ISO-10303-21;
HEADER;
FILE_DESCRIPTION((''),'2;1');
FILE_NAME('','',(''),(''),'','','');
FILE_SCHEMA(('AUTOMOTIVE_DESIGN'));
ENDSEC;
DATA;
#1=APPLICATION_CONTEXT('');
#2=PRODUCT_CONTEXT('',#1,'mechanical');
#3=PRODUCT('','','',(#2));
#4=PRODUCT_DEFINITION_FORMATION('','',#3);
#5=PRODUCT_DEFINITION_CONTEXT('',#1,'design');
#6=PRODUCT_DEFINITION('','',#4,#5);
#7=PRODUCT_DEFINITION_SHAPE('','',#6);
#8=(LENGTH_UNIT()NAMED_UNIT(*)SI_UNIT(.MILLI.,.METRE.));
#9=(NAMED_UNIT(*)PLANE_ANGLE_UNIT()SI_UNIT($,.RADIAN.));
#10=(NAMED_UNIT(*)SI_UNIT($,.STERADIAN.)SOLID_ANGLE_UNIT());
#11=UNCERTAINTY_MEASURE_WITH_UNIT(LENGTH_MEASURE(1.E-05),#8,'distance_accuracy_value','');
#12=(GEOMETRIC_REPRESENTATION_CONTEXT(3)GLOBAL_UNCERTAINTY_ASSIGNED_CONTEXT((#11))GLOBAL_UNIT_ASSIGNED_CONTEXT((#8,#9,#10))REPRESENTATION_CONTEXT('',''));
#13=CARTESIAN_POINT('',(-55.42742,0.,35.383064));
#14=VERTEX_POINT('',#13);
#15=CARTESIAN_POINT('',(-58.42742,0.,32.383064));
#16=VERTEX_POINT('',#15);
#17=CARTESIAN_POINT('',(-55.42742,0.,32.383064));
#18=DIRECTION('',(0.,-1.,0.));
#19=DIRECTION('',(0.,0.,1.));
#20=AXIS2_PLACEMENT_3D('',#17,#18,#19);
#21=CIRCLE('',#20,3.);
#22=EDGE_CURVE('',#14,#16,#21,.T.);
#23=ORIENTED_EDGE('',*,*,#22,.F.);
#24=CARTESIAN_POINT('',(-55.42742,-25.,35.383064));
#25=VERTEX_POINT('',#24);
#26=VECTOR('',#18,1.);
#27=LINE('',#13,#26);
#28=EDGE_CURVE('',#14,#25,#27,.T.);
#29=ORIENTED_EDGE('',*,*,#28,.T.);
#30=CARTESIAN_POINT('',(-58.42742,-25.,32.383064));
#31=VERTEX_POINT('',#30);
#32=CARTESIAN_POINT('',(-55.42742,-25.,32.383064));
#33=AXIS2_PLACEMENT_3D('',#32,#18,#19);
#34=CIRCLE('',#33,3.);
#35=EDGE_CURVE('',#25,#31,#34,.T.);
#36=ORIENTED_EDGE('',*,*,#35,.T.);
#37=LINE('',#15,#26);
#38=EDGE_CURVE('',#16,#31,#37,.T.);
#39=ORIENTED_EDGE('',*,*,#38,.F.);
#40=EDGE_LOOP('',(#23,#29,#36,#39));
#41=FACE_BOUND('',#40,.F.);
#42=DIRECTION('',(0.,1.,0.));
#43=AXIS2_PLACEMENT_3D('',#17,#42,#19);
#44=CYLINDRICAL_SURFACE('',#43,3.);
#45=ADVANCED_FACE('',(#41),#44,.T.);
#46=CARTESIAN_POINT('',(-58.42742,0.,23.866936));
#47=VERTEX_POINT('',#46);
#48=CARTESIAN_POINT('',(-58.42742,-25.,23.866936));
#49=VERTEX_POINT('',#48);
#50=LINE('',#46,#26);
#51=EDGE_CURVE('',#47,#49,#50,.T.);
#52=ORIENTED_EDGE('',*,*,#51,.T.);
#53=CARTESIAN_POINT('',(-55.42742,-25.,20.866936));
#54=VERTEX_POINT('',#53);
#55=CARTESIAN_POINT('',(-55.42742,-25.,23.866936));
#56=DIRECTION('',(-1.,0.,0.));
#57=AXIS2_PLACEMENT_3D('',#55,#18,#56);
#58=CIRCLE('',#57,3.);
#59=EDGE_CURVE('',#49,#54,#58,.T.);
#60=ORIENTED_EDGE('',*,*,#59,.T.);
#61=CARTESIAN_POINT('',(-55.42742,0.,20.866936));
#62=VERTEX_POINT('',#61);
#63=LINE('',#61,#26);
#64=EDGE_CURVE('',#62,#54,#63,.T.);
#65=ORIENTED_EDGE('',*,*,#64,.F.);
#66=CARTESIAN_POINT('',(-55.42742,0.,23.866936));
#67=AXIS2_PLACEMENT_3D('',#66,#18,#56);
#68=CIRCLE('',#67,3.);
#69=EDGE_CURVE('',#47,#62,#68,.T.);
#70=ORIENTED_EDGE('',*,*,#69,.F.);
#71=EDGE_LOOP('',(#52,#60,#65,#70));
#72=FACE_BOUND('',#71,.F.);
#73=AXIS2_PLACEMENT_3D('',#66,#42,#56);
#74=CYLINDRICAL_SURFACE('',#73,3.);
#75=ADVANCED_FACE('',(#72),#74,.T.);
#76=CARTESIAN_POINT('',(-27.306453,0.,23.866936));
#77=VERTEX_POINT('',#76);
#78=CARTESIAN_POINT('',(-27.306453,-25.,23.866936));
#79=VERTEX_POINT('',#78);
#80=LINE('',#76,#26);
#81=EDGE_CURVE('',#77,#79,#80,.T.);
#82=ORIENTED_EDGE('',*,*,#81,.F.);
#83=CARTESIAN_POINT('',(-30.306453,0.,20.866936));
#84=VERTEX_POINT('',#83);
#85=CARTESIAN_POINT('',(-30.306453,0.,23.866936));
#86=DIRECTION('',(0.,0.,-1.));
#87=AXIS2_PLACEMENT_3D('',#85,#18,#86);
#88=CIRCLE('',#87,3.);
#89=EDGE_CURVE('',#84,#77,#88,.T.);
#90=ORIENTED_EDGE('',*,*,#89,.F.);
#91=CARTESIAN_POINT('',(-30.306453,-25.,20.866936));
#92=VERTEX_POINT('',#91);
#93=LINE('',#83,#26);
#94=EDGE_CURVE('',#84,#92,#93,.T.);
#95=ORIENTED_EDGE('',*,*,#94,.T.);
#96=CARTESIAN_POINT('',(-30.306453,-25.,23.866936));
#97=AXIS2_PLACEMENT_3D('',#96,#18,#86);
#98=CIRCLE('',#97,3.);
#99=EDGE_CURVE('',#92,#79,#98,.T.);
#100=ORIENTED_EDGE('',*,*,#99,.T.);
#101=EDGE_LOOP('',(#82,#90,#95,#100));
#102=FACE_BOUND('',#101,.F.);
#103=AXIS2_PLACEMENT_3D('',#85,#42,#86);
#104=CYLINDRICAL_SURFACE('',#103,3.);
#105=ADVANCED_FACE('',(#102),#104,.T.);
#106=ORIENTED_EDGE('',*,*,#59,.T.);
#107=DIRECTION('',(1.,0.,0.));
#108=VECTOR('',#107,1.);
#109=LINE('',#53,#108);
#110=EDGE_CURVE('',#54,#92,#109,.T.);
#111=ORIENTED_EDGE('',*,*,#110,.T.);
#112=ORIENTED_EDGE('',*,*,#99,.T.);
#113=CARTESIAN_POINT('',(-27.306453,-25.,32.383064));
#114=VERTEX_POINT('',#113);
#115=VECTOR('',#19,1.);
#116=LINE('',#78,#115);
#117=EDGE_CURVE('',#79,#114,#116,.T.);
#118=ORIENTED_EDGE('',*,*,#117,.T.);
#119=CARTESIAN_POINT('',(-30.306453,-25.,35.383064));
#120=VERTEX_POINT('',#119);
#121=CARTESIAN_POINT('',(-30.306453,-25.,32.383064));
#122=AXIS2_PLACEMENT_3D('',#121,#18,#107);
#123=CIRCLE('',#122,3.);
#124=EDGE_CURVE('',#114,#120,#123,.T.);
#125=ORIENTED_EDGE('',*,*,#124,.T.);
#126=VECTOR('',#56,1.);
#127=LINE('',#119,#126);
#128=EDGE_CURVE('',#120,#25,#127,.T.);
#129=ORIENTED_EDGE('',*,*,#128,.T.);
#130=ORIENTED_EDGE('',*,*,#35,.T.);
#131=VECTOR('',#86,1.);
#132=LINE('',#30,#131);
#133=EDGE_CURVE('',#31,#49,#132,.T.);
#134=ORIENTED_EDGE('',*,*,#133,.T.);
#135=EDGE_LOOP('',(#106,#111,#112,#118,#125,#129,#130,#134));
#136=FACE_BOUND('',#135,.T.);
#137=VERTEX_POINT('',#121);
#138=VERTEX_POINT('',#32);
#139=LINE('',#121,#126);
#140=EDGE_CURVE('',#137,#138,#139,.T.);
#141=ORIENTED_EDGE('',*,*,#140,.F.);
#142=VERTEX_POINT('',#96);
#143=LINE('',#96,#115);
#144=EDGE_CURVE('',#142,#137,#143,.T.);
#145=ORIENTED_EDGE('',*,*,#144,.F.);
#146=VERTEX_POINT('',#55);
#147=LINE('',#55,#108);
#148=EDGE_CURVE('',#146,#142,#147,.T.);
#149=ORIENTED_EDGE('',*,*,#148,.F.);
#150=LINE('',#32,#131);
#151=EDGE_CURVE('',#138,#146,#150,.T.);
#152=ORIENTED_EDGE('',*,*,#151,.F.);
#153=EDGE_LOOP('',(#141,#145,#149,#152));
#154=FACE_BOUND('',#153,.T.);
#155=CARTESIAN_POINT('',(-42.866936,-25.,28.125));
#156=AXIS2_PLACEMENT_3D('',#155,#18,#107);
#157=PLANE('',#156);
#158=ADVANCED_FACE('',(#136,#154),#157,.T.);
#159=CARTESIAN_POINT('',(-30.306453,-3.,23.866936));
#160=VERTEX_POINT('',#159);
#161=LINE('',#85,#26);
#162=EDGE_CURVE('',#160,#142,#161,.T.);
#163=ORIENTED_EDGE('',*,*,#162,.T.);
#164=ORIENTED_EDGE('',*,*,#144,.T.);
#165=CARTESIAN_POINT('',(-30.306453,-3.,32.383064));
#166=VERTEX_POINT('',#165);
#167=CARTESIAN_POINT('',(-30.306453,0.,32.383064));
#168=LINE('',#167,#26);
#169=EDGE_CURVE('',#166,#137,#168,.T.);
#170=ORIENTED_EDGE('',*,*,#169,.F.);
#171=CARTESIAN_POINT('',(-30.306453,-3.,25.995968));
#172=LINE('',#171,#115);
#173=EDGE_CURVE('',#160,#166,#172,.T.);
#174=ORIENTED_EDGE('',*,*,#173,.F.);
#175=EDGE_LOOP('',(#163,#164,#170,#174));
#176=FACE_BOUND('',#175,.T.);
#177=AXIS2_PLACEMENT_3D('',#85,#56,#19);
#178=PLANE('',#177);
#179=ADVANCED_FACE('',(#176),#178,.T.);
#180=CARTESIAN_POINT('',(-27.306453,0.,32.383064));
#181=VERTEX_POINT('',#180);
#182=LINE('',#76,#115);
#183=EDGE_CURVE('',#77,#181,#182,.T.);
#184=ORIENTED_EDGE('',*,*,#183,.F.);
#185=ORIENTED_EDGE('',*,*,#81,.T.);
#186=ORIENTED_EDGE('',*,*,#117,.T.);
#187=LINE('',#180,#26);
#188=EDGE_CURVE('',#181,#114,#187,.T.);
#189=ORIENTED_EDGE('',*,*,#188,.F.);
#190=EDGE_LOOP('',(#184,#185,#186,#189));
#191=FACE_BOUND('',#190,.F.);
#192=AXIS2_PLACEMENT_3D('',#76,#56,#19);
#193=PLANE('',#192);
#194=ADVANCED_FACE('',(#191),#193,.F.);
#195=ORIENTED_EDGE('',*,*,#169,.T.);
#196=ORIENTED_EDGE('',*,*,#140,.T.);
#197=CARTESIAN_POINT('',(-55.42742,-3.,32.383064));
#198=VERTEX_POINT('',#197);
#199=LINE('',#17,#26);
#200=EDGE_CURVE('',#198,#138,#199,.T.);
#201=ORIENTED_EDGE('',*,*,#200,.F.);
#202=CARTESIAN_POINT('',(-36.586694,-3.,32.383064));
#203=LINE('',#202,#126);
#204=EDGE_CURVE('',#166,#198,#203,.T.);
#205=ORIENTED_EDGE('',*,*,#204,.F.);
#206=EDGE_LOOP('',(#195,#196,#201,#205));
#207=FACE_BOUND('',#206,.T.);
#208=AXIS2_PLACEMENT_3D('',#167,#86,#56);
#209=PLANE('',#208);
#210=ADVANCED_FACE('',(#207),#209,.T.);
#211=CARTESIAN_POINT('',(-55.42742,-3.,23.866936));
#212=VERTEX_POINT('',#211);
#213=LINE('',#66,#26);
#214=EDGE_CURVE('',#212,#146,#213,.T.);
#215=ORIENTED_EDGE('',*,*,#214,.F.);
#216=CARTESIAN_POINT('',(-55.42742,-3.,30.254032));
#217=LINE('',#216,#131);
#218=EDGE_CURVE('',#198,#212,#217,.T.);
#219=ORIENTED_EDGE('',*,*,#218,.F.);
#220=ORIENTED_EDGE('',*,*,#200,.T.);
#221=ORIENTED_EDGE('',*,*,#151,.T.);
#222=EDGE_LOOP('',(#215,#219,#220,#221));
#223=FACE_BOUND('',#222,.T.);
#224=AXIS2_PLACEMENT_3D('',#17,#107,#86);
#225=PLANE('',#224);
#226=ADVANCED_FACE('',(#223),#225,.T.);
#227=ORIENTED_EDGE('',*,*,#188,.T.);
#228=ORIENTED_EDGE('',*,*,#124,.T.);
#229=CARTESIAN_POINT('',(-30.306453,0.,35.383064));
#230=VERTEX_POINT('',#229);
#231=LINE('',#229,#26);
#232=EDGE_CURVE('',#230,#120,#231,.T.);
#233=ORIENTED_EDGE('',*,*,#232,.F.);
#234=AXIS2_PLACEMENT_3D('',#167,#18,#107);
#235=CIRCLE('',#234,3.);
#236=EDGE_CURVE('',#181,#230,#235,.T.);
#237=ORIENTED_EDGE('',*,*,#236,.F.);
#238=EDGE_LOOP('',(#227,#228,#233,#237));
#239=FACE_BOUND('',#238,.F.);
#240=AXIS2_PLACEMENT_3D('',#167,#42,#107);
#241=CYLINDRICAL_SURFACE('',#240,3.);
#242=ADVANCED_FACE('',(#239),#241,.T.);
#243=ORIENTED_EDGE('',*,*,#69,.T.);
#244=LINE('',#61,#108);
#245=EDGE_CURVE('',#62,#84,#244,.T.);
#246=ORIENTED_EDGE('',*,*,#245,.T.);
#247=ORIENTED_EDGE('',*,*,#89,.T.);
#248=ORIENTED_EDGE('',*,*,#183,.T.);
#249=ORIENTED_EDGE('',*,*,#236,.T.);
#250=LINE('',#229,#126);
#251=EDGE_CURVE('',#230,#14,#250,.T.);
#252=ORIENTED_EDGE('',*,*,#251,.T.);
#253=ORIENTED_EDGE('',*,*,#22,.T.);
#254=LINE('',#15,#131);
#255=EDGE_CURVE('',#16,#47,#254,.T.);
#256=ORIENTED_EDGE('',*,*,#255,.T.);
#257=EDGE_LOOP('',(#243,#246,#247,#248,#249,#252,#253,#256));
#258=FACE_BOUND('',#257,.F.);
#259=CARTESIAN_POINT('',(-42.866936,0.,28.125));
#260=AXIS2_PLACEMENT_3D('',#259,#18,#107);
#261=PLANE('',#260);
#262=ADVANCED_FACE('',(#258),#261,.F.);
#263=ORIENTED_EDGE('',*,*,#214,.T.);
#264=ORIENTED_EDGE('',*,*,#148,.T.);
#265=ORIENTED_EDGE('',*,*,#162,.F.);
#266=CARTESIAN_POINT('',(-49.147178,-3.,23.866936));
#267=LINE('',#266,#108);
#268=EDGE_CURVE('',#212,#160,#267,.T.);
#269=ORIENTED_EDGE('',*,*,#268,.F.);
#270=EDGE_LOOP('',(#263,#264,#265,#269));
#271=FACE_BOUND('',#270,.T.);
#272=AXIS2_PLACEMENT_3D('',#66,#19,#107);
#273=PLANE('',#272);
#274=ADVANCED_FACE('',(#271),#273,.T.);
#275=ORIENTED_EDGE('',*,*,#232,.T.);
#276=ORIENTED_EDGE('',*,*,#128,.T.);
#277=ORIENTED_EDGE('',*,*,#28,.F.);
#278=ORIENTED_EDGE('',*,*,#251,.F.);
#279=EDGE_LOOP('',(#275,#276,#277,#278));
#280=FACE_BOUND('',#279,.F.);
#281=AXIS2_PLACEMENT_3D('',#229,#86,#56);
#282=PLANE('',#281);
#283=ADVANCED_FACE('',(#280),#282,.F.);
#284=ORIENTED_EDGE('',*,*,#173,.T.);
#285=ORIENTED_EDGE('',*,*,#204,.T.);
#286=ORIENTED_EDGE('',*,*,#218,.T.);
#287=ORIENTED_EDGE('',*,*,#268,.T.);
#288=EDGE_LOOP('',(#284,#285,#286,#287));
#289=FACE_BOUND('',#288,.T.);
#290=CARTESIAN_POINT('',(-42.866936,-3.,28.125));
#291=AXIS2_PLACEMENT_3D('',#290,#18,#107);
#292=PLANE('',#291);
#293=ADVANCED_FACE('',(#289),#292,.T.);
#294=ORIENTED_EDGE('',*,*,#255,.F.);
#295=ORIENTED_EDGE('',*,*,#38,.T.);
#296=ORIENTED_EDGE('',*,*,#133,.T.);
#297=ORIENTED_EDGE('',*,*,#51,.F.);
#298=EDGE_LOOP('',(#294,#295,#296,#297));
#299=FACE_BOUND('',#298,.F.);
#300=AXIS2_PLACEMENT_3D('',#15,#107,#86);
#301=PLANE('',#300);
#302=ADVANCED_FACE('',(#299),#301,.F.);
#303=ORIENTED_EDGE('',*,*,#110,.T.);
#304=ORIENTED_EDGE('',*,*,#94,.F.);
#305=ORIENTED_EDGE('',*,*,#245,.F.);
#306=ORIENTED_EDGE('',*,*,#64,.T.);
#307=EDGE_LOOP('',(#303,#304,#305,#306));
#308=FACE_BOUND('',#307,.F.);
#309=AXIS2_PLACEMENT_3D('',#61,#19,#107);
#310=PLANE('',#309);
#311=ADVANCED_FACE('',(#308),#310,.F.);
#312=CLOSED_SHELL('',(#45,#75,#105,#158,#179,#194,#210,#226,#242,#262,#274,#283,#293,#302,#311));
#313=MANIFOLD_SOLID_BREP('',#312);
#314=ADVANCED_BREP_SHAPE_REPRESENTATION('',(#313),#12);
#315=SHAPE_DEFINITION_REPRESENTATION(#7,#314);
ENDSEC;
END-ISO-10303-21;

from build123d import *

# Parameters (mm, degrees)
F1_DEPTH = 25
F2_T     = 3


# Not quite as in the source:
# - a shell that OpenCascade refuses in one call is made with other operations: the cavity is built on its own and cut out


with BuildPart() as f1:
    # F0 (on Front) → F1 (new body)
    with BuildSketch(Plane.XZ):
        with BuildLine():
            Line((-30.3064525574, 35.3830642998), (-55.4274195135, 35.3830642998))
            ThreePointArc((-55.4274195135, 35.3830642998), (-57.548739857, 34.5043846434), (-58.4274195135, 32.3830642998))
            Line((-58.4274195135, 32.3830642998), (-58.4274195135, 23.8669360727))
            ThreePointArc((-58.4274195135, 23.8669360727), (-57.548739857, 21.7456157291), (-55.4274195135, 20.8669360727))
            Line((-55.4274195135, 20.8669360727), (-30.3064525574, 20.8669360727))
            ThreePointArc((-30.3064525574, 20.8669360727), (-28.1851322139, 21.7456157291), (-27.3064525574, 23.8669360727))
            Line((-27.3064525574, 23.8669360727), (-27.3064525574, 32.3830642998))
            ThreePointArc((-27.3064525574, 32.3830642998), (-28.1851322139, 34.5043846434), (-30.3064525574, 35.3830642998))
        make_face()
    extrude(amount=F1_DEPTH)

    # F2: shell of thickness 3, made by hand


with BuildPart() as f2_core1:
    # F2_t2: copy of F1
    add(f1.part)

    # the walls: a layer under each face that stays
    f2_faces = [f2_core1.faces().sort_by_distance(p)[0] for p in [
        (-42.8669360355, -12.5, 35.3830642998),
        (-58.4274195135, -12.5, 28.1250001863),
        (-42.8669360355, -12.5, 20.8669360727),
        (-27.3064525574, -12.5, 28.1250001863),
        (-42.8669360355, 0, 28.1250001863),
    ]]
    thicken(f2_faces, amount=-F2_T, mode=Mode.SUBTRACT)


with BuildPart() as f1_1:
    add(f1.part)

    # what is left inside the walls is the cavity
    f2_cavity = [f2_core1.part.solids().sort_by_distance(p)[0] for p in [
        (-42.866936, -17.666667, 23.896936),
    ]]
    add(f2_cavity, mode=Mode.SUBTRACT)


solid = f1_1.part
